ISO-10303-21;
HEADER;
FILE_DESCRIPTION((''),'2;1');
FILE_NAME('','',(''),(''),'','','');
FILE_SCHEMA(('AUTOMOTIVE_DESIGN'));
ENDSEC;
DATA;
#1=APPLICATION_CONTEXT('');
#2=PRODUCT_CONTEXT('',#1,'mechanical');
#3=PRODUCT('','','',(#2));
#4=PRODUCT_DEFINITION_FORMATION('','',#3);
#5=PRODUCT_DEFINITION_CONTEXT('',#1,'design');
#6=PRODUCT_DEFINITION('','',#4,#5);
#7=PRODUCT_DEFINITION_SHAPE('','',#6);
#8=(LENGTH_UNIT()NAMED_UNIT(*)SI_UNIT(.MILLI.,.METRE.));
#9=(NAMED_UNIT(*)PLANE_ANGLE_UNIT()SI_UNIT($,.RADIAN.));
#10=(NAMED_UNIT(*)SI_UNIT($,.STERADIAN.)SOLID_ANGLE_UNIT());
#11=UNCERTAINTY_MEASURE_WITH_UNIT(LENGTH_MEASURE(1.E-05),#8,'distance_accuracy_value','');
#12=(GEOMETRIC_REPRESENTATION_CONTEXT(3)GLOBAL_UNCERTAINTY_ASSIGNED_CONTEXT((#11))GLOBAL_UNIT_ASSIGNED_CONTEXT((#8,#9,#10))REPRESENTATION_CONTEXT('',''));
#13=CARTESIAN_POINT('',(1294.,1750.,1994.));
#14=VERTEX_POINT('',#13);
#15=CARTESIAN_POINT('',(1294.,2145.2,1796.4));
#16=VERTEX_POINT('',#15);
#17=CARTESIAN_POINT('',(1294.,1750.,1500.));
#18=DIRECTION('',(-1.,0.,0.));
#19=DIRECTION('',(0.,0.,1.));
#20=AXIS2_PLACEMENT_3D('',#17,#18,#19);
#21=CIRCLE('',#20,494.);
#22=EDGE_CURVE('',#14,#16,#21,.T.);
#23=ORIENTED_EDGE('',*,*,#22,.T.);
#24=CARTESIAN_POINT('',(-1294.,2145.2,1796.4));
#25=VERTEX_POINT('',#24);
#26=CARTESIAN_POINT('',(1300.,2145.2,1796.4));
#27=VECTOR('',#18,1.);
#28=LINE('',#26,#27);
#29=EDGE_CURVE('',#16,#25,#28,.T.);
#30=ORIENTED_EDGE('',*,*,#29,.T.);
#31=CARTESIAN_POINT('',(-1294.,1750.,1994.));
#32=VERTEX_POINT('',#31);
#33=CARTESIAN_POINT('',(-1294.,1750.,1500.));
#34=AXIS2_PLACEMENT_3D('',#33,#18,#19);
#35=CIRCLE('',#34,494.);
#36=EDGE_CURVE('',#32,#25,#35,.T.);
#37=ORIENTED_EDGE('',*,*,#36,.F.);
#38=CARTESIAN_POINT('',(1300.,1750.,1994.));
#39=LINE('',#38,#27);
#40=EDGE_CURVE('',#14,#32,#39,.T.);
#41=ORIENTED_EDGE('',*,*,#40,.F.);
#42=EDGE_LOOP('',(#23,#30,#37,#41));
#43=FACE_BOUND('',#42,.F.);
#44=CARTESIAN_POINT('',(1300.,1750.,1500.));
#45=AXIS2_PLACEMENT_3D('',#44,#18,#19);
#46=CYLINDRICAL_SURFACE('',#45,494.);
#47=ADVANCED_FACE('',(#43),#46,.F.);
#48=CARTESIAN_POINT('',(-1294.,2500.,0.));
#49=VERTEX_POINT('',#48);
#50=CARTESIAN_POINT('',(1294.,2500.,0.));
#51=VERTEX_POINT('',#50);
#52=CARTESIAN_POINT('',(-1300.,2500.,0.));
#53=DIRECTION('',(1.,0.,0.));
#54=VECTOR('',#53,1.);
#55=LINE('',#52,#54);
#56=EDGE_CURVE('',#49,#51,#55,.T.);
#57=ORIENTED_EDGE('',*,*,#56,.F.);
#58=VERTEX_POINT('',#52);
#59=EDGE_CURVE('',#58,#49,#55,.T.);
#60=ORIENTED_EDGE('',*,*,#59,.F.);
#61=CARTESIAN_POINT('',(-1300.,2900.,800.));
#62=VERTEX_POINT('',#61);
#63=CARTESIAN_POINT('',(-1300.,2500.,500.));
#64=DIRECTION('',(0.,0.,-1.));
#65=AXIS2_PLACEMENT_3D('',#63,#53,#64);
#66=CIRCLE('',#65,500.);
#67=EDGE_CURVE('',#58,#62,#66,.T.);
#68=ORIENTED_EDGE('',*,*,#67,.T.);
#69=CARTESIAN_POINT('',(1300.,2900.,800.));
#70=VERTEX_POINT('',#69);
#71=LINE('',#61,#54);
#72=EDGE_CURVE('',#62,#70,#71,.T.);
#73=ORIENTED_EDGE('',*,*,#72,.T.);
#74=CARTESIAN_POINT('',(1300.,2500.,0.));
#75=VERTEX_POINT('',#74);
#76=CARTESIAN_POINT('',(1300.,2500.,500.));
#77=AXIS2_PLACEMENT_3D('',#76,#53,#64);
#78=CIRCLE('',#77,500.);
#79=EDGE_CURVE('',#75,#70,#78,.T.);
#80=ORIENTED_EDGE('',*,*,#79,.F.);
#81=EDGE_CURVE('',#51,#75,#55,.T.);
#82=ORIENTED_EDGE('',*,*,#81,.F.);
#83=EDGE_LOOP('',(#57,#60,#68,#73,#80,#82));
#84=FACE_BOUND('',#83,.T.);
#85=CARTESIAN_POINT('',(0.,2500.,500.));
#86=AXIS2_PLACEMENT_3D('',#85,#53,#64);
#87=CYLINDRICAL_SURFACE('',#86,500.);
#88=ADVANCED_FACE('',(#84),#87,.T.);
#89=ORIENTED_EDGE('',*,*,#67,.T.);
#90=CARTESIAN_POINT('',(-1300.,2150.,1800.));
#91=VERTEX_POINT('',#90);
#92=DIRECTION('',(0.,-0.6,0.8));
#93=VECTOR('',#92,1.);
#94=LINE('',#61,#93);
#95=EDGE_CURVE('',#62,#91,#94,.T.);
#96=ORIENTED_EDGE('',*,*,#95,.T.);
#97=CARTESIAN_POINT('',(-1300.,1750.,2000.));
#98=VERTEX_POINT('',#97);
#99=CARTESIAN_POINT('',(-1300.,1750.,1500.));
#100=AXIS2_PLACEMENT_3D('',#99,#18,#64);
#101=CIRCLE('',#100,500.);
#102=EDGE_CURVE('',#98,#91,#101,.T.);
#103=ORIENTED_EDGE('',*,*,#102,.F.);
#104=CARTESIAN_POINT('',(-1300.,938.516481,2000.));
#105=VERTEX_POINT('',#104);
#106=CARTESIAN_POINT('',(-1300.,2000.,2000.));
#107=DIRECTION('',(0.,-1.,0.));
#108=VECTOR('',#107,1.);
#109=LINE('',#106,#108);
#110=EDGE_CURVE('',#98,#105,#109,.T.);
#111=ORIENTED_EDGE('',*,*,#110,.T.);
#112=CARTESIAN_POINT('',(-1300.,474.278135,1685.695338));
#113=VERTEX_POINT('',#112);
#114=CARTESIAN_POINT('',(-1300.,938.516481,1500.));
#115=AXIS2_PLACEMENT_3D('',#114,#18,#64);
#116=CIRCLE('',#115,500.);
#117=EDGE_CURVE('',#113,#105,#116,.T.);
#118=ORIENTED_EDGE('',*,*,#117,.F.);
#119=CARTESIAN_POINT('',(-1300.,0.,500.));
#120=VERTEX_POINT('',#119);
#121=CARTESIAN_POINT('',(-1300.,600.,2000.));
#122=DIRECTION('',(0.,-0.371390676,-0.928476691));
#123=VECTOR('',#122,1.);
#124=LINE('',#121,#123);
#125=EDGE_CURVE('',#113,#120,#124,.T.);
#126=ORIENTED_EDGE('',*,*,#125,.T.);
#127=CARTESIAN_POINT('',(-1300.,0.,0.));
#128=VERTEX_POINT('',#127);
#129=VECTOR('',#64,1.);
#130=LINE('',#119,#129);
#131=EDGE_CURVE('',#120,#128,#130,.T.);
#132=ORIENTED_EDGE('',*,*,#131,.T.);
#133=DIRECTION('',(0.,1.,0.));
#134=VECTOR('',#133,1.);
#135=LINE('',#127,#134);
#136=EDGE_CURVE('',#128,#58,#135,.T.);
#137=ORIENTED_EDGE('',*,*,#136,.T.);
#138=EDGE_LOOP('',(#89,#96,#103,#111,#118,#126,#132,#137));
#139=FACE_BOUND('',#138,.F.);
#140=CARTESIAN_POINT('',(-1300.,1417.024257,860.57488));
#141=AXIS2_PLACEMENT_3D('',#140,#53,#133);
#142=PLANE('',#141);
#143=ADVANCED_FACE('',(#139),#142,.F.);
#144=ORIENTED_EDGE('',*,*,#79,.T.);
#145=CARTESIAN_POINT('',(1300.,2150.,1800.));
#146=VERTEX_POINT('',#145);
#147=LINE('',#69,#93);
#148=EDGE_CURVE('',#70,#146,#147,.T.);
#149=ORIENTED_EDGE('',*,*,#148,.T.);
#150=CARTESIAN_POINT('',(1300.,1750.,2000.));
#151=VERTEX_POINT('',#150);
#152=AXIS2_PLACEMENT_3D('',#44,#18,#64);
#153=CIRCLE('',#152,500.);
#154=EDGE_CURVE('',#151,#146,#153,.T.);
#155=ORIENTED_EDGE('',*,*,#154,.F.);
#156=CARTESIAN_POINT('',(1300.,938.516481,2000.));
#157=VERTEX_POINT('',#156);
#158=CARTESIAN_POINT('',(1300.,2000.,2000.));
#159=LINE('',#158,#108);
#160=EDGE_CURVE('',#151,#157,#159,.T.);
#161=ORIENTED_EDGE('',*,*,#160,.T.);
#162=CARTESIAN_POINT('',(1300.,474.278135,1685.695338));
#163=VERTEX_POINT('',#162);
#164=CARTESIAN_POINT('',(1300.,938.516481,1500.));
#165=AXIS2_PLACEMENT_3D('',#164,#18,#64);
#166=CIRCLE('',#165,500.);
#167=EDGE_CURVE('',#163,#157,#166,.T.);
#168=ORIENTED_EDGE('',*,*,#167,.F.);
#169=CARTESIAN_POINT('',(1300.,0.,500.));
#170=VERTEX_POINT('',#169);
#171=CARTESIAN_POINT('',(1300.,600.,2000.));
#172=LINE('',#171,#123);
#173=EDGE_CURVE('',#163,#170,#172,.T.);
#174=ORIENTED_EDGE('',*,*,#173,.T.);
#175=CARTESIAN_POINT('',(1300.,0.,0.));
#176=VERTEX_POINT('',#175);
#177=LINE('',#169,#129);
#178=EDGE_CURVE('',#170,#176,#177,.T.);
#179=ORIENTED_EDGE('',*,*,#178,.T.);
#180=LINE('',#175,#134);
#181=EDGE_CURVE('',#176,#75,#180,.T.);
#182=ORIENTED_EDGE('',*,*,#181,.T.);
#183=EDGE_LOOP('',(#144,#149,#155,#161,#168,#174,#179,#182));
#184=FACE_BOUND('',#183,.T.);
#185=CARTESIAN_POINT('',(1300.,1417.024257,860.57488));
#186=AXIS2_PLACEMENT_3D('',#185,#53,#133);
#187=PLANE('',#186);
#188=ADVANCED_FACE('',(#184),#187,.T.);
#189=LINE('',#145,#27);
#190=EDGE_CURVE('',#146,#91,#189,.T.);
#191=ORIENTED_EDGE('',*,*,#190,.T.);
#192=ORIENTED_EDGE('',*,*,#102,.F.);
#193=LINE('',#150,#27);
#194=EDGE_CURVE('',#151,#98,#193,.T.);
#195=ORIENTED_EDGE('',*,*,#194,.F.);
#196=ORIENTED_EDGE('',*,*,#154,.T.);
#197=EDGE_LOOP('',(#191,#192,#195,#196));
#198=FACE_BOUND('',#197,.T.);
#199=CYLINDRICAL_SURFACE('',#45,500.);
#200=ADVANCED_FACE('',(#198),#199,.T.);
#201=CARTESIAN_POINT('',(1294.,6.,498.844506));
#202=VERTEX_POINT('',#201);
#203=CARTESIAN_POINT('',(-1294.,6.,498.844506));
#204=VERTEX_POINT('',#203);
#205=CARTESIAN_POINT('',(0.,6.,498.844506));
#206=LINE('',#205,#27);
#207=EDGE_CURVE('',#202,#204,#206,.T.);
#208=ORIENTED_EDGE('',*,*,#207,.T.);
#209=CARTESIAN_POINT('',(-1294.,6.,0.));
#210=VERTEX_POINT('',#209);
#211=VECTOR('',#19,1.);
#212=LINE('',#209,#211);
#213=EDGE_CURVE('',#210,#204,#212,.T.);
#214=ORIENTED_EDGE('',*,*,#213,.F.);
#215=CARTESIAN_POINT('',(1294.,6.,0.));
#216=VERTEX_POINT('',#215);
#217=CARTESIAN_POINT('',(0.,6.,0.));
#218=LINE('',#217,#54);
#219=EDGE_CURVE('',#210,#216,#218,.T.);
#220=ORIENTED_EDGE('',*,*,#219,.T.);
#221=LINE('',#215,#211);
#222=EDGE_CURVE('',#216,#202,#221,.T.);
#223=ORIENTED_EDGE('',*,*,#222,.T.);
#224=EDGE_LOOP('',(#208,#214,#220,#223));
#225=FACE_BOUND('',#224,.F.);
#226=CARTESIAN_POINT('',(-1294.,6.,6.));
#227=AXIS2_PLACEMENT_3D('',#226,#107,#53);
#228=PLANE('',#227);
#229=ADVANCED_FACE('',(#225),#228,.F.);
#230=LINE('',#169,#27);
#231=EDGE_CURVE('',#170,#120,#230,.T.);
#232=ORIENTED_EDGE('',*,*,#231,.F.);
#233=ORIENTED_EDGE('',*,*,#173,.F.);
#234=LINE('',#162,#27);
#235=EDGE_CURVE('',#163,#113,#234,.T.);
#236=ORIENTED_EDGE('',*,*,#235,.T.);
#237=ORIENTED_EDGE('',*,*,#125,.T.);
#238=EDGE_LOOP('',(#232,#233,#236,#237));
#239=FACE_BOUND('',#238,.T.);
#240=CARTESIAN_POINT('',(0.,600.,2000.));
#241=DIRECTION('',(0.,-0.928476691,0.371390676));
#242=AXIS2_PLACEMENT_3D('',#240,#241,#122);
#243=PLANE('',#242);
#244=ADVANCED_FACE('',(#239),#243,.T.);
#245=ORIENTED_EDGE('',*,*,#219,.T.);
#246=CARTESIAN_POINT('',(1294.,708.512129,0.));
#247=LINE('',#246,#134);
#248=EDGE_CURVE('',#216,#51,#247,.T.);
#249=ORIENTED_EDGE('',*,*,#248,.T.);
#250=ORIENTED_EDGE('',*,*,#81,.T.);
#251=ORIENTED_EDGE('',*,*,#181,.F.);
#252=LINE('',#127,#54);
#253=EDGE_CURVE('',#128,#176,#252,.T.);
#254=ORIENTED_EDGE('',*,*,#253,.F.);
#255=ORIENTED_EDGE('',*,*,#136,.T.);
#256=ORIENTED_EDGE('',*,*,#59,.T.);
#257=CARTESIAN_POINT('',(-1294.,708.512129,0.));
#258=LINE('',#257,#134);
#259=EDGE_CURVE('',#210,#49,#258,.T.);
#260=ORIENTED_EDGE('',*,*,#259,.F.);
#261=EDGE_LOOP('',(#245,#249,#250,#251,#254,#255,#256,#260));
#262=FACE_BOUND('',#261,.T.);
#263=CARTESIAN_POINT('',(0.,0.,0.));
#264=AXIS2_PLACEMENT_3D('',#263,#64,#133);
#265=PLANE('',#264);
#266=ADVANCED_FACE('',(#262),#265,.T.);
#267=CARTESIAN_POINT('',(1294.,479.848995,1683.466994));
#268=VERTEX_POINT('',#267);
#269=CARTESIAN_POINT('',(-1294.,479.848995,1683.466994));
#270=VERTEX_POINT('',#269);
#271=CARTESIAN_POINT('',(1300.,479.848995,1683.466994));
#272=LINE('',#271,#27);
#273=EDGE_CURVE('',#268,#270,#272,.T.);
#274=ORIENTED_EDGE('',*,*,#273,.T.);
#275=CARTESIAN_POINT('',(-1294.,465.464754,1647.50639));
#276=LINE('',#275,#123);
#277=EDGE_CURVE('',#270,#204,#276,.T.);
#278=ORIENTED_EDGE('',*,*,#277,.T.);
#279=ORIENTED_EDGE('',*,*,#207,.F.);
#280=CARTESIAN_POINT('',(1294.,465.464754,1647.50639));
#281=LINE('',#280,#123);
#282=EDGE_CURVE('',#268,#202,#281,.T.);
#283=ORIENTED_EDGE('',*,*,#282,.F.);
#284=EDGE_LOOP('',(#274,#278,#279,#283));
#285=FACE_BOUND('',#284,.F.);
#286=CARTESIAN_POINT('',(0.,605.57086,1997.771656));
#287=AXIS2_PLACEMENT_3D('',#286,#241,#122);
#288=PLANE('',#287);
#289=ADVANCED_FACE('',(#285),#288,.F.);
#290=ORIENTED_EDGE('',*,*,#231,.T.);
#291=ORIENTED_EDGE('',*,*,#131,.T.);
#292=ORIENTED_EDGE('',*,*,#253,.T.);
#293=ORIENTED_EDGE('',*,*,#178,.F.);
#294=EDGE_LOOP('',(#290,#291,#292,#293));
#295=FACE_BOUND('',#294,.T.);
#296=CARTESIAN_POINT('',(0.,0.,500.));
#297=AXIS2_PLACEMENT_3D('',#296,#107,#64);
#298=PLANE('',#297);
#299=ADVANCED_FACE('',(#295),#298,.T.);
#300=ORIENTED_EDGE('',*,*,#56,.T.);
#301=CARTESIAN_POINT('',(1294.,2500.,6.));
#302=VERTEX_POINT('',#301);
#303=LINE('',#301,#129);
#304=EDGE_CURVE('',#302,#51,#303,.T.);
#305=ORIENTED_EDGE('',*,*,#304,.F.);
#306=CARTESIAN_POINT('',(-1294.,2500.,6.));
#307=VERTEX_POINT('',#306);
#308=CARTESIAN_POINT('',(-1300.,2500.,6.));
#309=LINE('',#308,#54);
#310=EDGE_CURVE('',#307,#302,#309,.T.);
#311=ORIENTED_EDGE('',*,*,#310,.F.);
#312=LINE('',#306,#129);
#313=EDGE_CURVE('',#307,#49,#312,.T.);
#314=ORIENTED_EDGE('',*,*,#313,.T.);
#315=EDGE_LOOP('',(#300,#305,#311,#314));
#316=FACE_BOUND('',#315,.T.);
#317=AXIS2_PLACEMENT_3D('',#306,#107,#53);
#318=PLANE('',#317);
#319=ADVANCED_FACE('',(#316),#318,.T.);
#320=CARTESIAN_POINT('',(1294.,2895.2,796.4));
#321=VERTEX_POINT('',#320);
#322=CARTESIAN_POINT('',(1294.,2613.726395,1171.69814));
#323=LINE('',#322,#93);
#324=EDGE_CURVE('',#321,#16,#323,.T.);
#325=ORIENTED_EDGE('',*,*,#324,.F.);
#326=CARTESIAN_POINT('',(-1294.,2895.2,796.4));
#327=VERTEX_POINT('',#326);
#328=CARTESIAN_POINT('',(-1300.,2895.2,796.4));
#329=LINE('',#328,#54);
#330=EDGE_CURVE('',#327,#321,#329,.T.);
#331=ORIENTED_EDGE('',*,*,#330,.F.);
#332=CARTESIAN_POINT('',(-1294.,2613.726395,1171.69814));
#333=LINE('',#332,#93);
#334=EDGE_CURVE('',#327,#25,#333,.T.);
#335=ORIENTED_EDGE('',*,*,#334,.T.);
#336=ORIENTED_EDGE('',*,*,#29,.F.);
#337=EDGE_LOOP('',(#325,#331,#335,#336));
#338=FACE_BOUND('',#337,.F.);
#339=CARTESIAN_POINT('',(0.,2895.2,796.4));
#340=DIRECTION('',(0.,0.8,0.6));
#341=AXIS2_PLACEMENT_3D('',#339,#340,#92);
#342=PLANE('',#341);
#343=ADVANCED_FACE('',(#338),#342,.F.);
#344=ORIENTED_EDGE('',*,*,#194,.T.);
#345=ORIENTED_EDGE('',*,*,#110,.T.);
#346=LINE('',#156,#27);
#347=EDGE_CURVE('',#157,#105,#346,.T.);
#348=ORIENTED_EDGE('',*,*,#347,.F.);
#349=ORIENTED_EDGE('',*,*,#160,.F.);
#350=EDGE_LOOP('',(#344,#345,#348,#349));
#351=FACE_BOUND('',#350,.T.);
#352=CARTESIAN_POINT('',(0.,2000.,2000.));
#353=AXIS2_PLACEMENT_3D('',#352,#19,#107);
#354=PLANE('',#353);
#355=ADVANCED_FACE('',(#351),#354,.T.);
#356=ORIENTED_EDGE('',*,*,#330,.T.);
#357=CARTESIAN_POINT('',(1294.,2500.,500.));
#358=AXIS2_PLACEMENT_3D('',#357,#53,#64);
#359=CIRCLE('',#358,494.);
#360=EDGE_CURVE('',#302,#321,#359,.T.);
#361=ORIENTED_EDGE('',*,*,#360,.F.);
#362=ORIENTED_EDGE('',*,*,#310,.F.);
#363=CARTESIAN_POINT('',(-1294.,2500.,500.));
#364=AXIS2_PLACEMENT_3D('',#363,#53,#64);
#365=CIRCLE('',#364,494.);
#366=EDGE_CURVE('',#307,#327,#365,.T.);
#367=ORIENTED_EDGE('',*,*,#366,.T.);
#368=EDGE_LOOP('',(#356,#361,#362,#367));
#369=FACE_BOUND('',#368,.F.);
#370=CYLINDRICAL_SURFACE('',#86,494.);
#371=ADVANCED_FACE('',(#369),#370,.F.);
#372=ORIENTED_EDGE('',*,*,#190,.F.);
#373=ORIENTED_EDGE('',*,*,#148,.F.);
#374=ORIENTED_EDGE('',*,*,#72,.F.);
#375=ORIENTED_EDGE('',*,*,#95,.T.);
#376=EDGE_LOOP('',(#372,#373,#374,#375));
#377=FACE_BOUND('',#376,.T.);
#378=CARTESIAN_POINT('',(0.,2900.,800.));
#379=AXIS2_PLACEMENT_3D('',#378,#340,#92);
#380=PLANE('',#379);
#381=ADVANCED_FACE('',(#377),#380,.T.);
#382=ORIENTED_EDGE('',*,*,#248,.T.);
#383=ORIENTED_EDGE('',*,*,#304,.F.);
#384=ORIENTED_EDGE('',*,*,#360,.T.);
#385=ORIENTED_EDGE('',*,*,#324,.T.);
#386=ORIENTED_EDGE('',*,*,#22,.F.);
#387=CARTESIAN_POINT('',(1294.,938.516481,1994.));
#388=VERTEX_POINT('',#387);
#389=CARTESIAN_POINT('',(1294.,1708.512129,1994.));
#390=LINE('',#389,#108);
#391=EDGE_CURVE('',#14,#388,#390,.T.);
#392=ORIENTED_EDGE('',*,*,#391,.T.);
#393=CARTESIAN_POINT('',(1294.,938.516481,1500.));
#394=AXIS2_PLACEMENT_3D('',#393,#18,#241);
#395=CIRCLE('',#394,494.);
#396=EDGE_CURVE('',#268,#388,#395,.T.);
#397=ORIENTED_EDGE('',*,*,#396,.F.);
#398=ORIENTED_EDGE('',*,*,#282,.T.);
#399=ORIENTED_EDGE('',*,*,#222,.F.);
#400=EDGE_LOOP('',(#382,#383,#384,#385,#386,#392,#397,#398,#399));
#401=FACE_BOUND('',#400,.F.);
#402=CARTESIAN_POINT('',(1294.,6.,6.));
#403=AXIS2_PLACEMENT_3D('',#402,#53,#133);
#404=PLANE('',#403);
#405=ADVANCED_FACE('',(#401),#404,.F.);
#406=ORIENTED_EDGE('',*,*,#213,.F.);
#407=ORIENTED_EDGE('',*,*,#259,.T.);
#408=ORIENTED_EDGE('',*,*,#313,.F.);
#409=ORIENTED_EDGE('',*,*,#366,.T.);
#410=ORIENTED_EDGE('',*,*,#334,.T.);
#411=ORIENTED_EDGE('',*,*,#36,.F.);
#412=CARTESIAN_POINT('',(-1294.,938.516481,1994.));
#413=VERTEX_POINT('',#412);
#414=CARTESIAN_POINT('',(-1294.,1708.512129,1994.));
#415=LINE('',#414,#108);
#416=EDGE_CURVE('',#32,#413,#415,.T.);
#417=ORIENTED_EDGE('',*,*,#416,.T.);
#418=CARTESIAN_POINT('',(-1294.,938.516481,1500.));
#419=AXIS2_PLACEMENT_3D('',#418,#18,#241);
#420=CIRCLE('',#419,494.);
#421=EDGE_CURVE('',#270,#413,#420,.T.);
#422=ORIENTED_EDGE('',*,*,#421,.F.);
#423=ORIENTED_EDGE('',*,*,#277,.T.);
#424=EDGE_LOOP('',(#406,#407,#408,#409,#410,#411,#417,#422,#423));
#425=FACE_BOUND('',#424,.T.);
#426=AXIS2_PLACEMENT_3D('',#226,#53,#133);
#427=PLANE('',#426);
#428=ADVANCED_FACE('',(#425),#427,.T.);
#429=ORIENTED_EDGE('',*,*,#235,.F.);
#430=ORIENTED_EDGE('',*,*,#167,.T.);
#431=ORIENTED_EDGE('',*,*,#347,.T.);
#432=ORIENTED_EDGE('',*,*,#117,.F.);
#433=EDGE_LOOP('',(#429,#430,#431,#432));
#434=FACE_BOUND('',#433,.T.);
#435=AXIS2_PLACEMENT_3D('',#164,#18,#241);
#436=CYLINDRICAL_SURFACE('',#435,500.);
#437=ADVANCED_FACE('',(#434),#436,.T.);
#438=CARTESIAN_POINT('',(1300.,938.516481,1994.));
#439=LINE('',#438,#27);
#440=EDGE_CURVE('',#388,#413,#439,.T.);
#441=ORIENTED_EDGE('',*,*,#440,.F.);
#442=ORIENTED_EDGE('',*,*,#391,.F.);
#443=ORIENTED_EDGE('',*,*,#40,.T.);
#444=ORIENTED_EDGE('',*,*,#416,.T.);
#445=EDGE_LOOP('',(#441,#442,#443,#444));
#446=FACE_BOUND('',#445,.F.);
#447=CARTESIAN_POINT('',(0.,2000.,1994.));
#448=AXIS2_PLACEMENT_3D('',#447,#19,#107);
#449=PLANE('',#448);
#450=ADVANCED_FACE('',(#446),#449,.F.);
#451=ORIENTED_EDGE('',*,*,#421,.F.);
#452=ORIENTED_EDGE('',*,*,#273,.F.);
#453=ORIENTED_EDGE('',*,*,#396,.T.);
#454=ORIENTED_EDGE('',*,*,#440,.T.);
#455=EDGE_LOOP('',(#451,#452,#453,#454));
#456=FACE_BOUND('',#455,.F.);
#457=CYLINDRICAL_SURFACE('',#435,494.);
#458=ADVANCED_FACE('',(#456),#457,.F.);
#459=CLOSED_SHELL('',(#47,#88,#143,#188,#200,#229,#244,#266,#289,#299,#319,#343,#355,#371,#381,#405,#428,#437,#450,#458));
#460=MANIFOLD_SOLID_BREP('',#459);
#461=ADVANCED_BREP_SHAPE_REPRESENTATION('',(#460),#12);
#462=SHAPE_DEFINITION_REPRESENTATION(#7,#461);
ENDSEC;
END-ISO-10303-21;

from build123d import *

# Parameters (mm, degrees)
F1_DEPTH = 1300
F2_R     = 500
F3_T     = -6


# Not quite as in the source:
# - a shell that OpenCascade refuses in one call is made with other operations: the cavity is built on its own and cut out


with BuildPart() as f1:
    # F0 (on Right) → F1 (new body, symmetric)
    with BuildSketch(Plane.YZ):
        with BuildLine():
            Line((0, 500), (0, 0))
            Line((0, 0), (2500, 0))
            ThreePointArc((2500, 0), (2947.2135955, 276.39320225), (2900, 800))
            Line((2900, 800), (2000, 2000))
            Line((2000, 2000), (600, 2000))
            Line((600, 2000), (0, 500))
        make_face()
    extrude(amount=F1_DEPTH, both=True)

    # F2
    f2_edges = [f1.edges().sort_by_distance(p)[0] for p in [
        (0, 600, 2000),
        (0, 2000, 2000),
    ]]
    fillet(f2_edges, radius=F2_R)

    # F3: a shell. OpenCascade refuses it in one call, so the cavity is built on its own and cut out:
    # the body offset inwards by the wall thickness, plus a prism from it out through each open face.
    f3_core = offset(f1.part, amount=F3_T, mode=Mode.PRIVATE)
    f3_exits = [f3_core.faces().sort_by_distance(p)[0] for p in [
        (0, 1253, 6),
    ]]
    add(f3_core, mode=Mode.SUBTRACT)
    extrude(f3_exits, amount=-F3_T, mode=Mode.SUBTRACT)


solid = f1.part
